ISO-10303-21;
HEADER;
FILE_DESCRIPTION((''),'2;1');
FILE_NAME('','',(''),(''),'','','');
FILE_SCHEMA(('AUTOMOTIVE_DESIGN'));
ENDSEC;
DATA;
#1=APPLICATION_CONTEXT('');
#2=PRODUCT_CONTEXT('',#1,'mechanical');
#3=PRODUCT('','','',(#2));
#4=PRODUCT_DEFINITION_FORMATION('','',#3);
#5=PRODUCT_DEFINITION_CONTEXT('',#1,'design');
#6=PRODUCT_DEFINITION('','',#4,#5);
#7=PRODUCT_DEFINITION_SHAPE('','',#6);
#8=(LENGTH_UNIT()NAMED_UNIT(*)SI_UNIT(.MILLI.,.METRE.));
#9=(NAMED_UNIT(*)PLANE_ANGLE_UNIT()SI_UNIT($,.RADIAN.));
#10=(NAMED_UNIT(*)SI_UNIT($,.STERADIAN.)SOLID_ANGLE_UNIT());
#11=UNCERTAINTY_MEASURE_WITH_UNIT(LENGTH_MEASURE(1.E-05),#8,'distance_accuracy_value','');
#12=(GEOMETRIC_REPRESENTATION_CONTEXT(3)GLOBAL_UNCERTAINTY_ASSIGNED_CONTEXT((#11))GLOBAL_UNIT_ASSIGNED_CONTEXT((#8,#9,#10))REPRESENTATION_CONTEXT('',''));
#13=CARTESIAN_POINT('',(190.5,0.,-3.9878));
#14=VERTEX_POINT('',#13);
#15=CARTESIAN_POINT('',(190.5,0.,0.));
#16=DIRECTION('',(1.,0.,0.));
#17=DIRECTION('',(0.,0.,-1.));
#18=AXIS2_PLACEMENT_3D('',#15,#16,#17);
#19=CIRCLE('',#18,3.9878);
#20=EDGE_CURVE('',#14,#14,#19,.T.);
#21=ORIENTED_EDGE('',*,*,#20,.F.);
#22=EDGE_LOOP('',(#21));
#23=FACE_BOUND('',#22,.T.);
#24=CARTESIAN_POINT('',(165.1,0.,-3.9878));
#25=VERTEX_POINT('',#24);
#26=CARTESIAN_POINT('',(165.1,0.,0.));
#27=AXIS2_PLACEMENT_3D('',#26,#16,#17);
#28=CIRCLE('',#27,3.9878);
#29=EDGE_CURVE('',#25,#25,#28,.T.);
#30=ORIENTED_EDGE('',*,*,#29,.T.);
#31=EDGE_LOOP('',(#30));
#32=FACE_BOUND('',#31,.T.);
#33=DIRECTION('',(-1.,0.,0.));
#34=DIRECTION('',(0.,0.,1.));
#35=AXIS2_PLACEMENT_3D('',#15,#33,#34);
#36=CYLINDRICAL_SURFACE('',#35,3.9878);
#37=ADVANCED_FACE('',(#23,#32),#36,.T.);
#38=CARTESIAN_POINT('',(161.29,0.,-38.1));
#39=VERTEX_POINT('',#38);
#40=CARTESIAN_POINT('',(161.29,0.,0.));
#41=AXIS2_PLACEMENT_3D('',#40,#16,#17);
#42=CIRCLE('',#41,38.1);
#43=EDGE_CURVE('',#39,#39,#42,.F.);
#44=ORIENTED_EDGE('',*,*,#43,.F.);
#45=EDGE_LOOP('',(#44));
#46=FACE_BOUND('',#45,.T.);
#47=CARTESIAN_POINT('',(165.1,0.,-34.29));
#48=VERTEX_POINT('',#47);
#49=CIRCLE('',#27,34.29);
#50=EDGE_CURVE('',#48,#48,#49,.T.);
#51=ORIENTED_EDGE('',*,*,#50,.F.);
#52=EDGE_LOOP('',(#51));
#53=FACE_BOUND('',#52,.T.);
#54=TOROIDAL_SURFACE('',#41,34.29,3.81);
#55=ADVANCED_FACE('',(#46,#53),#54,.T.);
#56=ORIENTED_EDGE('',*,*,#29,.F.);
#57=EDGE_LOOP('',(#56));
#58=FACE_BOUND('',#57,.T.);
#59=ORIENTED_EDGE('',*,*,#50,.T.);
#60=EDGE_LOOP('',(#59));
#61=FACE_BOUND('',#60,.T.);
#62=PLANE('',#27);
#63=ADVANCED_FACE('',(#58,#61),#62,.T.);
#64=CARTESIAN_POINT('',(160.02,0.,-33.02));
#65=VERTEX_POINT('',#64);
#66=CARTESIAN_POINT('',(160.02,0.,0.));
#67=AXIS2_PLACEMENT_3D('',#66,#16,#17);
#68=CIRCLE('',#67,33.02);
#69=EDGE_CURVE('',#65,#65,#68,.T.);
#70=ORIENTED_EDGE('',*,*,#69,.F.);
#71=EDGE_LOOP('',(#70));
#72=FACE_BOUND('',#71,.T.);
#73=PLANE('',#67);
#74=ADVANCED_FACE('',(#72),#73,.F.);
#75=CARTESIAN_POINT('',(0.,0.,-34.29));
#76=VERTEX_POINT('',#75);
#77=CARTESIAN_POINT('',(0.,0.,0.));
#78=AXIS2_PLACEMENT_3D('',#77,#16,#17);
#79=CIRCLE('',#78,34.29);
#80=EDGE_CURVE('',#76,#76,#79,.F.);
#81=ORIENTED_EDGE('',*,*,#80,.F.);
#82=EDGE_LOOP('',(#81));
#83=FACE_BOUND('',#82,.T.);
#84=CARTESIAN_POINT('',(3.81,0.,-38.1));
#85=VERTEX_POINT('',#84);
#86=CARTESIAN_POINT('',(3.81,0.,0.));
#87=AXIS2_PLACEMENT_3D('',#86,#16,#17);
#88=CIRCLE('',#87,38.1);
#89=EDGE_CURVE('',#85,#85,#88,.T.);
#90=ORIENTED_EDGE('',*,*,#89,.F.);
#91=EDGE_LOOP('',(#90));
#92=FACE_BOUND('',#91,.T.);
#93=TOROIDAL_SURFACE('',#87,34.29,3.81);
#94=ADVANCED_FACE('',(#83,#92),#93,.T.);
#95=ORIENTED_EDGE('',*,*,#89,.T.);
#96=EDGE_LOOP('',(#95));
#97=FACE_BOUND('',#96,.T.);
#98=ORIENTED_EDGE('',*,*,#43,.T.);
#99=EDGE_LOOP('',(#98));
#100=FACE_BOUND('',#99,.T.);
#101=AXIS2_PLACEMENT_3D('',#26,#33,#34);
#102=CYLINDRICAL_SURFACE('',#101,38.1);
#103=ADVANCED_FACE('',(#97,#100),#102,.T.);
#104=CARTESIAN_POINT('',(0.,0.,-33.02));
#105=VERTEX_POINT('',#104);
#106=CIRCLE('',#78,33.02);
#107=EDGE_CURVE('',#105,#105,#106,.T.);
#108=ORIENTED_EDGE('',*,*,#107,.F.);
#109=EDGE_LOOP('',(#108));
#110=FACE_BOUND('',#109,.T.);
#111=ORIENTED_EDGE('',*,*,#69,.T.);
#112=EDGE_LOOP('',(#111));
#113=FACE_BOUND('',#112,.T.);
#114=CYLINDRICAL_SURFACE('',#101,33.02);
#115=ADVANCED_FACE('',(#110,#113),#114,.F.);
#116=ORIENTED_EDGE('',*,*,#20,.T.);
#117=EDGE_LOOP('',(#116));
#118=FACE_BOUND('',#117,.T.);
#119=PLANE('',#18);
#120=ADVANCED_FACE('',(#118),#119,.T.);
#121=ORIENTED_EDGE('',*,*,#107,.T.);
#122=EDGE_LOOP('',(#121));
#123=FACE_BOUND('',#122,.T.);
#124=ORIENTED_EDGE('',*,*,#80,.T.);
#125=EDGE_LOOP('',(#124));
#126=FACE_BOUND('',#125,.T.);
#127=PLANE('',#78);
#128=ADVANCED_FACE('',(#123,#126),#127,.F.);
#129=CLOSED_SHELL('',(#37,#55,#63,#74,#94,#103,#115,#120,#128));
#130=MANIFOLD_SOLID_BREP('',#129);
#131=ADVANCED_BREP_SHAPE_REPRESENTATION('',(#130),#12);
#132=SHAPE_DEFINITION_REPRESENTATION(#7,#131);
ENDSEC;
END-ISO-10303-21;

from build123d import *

# Parameters (mm, degrees)
SKETCH1_R           = 38.1
BOSS_EXTRUDE1_DEPTH = 165.1
SKETCH2_R           = 3.9878
BOSS_EXTRUDE2_DEPTH = 25.4
FILLET1_R           = 3.81
SHELL2_OUTLINE_R    = 33.02
SHELL2_DEPTH        = 160.02


# Read off the part's stored shape, not the designer's step: Shell2
with BuildPart() as part:
    # Sketch1 → Boss-Extrude1 (new body)
    with BuildSketch(Plane(origin=(0, 0, 0), x_dir=(0, 0, -1), z_dir=(1, 0, 0))):
        Circle(SKETCH1_R)
    extrude(amount=BOSS_EXTRUDE1_DEPTH)

    # Sketch2 → Boss-Extrude2 (add)
    with BuildSketch(Plane(origin=(165.1, 0, 0), x_dir=(0, 0, -1), z_dir=(1, 0, 0))):
        Circle(SKETCH2_R)
    extrude(amount=BOSS_EXTRUDE2_DEPTH)

    # Fillet1
    fillet1_edges = [part.edges().sort_by_distance(p)[0] for p in [
        (0, 0, 38.1),
        (165.1, 0, 38.1),
    ]]
    fillet(fillet1_edges, radius=FILLET1_R)

    # Shell2 outline → Shell2 (cut)
    with BuildSketch(Plane.YZ):
        Circle(SHELL2_OUTLINE_R)
    extrude(amount=SHELL2_DEPTH, mode=Mode.SUBTRACT)


solid = part.part
